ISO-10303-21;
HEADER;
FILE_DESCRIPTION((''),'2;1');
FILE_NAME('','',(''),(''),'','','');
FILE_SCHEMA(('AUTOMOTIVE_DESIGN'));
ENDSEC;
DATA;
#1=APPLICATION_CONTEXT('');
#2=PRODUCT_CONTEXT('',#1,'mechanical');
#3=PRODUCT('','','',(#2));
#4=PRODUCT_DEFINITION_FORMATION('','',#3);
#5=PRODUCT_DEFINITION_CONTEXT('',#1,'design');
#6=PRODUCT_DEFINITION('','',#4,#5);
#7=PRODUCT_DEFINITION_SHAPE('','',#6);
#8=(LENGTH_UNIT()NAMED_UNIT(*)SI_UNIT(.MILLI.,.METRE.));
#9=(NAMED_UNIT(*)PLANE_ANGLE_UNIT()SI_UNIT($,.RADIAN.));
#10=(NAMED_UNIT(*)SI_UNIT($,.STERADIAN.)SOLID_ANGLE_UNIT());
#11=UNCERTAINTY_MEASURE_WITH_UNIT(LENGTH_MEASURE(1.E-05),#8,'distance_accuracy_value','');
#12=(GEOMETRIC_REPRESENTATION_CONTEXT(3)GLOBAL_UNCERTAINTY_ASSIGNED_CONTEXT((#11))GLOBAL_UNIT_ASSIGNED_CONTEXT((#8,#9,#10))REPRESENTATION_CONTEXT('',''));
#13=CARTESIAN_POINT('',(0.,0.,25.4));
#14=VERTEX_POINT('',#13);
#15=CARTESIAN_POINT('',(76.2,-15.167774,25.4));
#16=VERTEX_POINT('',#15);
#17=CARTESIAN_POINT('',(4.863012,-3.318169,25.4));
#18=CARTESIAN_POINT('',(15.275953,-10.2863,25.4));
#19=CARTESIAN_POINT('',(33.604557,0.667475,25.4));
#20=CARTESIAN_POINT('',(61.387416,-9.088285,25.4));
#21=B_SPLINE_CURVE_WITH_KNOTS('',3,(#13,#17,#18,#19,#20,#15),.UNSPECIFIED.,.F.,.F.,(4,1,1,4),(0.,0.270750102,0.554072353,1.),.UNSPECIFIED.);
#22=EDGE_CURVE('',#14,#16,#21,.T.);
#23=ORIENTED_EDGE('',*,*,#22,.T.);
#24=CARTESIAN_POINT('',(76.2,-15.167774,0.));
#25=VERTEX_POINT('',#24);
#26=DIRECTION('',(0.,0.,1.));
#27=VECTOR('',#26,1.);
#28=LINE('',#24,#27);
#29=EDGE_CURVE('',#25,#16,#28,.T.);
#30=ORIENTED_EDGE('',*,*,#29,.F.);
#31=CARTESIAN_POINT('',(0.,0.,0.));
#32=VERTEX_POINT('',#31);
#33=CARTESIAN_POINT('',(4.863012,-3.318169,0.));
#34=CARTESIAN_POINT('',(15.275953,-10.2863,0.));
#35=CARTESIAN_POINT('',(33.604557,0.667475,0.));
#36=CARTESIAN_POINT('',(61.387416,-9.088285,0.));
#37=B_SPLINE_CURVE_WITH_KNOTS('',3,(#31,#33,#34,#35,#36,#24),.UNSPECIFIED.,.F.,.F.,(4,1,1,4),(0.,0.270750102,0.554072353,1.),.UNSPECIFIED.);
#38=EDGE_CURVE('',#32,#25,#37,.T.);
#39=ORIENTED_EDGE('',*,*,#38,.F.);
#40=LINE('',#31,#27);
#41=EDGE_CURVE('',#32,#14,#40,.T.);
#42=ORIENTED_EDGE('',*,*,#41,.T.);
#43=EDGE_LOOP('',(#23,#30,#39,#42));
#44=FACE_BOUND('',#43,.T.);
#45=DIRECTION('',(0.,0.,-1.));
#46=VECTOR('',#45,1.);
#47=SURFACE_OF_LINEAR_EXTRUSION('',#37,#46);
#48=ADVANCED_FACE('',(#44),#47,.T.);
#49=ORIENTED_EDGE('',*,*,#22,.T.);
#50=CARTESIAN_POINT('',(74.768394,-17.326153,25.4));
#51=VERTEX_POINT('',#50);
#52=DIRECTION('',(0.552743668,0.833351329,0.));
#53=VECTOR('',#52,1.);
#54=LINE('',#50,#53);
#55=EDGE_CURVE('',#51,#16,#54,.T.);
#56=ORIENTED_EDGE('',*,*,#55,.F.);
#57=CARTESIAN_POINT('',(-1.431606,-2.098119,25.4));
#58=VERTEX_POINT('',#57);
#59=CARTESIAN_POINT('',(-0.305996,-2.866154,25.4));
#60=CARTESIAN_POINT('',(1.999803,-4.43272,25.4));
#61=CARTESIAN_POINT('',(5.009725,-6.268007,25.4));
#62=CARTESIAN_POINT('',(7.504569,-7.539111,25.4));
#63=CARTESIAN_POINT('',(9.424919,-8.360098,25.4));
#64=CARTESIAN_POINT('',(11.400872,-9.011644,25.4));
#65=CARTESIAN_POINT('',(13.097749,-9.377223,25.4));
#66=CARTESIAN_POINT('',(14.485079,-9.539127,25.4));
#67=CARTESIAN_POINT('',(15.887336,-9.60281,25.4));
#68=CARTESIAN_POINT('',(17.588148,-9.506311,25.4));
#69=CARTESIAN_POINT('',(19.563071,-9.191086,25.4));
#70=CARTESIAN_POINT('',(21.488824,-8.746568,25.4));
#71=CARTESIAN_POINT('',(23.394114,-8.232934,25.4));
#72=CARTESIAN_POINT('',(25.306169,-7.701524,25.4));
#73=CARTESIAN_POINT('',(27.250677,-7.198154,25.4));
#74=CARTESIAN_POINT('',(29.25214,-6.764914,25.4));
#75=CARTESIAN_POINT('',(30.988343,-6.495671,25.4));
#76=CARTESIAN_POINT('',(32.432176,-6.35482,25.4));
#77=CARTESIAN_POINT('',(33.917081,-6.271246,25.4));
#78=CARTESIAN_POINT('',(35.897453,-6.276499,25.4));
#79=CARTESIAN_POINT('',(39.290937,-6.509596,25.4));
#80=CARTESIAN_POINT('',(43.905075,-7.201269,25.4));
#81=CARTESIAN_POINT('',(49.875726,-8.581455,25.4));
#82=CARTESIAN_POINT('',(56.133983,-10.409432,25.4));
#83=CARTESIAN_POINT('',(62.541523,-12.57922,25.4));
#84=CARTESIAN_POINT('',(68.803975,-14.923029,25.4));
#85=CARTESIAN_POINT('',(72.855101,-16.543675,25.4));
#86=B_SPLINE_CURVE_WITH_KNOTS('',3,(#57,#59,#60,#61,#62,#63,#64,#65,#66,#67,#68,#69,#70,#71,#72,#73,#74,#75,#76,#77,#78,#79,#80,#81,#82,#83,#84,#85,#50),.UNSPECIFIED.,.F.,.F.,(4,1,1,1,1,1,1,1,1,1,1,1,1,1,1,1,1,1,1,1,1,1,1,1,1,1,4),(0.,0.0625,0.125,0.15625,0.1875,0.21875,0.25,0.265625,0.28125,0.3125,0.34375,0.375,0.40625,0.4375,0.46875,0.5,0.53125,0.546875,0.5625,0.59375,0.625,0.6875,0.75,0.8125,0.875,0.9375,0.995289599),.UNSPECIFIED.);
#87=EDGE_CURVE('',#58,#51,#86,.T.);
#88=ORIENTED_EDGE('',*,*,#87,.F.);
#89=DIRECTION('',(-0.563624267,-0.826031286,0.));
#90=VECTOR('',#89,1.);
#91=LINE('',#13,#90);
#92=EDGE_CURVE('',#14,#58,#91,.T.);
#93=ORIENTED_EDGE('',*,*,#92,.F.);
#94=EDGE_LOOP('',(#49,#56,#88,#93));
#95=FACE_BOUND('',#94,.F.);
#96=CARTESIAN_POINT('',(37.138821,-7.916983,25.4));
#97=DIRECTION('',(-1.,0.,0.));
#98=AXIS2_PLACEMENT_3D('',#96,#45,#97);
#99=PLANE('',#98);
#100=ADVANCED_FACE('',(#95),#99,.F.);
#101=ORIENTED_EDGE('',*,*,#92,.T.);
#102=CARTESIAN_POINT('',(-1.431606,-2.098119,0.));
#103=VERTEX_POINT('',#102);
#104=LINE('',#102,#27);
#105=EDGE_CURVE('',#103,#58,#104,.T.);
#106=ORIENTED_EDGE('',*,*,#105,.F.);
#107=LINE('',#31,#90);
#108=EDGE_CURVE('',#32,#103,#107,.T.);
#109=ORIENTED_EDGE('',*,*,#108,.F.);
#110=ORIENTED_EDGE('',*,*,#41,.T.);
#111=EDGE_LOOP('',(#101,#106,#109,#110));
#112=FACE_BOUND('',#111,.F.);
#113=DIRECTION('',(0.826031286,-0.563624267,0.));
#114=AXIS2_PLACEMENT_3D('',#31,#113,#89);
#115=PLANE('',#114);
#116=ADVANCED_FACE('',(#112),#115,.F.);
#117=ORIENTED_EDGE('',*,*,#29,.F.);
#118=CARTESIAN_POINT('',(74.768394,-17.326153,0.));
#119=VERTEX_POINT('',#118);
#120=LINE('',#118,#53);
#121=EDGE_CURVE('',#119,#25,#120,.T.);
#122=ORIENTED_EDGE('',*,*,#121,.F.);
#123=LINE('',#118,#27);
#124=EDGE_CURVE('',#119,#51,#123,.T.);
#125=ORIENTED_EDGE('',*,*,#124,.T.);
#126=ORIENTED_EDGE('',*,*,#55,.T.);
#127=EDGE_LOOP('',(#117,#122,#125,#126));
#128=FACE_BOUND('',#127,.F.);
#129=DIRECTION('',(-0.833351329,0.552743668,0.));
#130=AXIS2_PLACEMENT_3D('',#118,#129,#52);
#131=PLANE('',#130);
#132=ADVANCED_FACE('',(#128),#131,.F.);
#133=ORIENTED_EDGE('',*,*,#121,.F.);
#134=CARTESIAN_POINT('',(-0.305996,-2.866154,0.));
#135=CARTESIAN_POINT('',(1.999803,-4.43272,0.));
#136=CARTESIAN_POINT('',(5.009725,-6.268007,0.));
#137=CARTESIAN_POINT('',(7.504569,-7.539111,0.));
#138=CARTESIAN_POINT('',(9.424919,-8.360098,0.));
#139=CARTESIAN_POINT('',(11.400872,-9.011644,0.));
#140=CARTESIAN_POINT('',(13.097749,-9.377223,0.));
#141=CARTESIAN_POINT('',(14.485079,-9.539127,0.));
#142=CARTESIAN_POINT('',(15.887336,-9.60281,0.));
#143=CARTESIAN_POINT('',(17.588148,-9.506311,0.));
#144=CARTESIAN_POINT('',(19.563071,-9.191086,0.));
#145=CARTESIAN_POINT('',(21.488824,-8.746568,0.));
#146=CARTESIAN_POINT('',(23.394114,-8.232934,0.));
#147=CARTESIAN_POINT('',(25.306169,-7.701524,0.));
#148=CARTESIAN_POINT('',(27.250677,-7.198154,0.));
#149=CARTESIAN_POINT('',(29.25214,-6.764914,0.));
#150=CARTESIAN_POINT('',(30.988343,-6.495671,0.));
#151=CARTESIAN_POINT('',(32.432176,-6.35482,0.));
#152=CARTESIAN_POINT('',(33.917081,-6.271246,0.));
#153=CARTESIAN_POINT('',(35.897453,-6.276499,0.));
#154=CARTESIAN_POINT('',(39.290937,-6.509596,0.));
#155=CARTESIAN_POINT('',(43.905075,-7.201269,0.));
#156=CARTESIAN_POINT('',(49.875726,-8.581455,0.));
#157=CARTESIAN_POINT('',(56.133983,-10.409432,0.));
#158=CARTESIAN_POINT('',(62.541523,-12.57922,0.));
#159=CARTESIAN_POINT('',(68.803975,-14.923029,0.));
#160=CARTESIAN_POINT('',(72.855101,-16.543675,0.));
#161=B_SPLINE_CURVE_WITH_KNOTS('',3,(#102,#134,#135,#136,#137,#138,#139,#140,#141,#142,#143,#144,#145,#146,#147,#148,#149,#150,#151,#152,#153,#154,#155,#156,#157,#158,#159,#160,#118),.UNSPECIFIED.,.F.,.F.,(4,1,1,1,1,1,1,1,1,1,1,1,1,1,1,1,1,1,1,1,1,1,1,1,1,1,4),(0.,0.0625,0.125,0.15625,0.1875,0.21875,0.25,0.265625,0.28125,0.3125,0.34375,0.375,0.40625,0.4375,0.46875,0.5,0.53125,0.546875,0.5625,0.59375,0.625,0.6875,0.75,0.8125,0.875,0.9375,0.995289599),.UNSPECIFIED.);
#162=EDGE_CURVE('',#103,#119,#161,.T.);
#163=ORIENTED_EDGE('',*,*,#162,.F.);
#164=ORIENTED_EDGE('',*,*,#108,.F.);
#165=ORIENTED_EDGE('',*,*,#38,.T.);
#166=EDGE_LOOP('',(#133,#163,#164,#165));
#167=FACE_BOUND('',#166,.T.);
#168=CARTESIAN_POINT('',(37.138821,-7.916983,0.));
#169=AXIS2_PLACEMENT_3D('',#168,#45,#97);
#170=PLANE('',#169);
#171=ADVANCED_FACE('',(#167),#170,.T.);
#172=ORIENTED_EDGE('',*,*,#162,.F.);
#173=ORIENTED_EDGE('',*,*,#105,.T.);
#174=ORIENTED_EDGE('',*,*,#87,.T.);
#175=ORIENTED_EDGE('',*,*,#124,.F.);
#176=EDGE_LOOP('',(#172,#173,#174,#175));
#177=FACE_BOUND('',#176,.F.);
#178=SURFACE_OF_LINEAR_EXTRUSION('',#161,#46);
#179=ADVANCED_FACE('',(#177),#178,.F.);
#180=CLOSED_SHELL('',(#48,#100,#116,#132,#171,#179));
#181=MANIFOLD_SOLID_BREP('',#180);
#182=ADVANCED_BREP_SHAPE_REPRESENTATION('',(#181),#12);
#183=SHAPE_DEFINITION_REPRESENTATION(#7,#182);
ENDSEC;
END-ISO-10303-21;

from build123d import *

# Parameters (mm, degrees)
F1_DEPTH = 25.4


# Not quite as in the source:
# - the dataset's text gives a spline's control points without its knots; the knots are read off the source's solid


with BuildPart() as f1:
    # F0 (on Top) → F1 (new body)
    with BuildSketch(Plane.XY):
        with BuildLine():
            add(Edge.make_bspline(
                [(0, 0), (4.8630121686, -3.3181693183), (15.2759533832, -10.2863001285), (33.6045572417, 0.6674747862), (61.3874158585, -9.0882847366), (76.2, -15.1677737013)],
                knots=[0, 0, 0, 0, 0.2707501019, 0.5540723526, 1, 1, 1, 1], degree=3))
            Line((0, 0), (-1.4316056384, -2.0981194666))
            add(Edge.make_bspline(
                [(-1.4316056384, -2.0981194666), (-0.305996139, -2.8661543338), (1.9998032211, -4.4327197905), (5.0097253075, -6.268006745), (7.5045686592, -7.5391109076), (9.4249187415, -8.3600980332), (11.4008720789, -9.011643965), (13.0977492135, -9.3772229214), (14.4850786594, -9.5391270908), (15.8873355108, -9.6028096872), (17.5881476385, -9.5063110655), (19.5630706723, -9.1910859259), (21.4888236888, -8.7465684012), (23.3941142493, -8.2329342762), (25.3061689722, -7.7015241141), (27.2506768842, -7.1981544829), (29.2521403856, -6.7649140684), (30.9883432325, -6.495671256), (32.432175868, -6.3548203249), (33.9170805519, -6.271245784), (35.8974527802, -6.2764985504), (39.2909372261, -6.5095961507), (43.9050753216, -7.2012689856), (49.8757255396, -8.581455062), (56.1339830831, -10.4094320792), (62.5415228715, -12.5792199237), (68.8039749461, -14.9230291487), (72.8551010948, -16.5436750777), (74.7683943279, -17.3261530312)],
                knots=[0, 0, 0, 0, 0.0625, 0.125, 0.15625, 0.1875, 0.21875, 0.25, 0.265625, 0.28125, 0.3125, 0.34375, 0.375, 0.40625, 0.4375, 0.46875, 0.5, 0.53125, 0.546875, 0.5625, 0.59375, 0.625, 0.6875, 0.75, 0.8125, 0.875, 0.9375, 0.9952895991, 0.9952895991, 0.9952895991, 0.9952895991], degree=3))
            Line((74.7683943616, -17.3261529488), (76.2, -15.1677737013))
        make_face()
    extrude(amount=F1_DEPTH)


solid = f1.part
